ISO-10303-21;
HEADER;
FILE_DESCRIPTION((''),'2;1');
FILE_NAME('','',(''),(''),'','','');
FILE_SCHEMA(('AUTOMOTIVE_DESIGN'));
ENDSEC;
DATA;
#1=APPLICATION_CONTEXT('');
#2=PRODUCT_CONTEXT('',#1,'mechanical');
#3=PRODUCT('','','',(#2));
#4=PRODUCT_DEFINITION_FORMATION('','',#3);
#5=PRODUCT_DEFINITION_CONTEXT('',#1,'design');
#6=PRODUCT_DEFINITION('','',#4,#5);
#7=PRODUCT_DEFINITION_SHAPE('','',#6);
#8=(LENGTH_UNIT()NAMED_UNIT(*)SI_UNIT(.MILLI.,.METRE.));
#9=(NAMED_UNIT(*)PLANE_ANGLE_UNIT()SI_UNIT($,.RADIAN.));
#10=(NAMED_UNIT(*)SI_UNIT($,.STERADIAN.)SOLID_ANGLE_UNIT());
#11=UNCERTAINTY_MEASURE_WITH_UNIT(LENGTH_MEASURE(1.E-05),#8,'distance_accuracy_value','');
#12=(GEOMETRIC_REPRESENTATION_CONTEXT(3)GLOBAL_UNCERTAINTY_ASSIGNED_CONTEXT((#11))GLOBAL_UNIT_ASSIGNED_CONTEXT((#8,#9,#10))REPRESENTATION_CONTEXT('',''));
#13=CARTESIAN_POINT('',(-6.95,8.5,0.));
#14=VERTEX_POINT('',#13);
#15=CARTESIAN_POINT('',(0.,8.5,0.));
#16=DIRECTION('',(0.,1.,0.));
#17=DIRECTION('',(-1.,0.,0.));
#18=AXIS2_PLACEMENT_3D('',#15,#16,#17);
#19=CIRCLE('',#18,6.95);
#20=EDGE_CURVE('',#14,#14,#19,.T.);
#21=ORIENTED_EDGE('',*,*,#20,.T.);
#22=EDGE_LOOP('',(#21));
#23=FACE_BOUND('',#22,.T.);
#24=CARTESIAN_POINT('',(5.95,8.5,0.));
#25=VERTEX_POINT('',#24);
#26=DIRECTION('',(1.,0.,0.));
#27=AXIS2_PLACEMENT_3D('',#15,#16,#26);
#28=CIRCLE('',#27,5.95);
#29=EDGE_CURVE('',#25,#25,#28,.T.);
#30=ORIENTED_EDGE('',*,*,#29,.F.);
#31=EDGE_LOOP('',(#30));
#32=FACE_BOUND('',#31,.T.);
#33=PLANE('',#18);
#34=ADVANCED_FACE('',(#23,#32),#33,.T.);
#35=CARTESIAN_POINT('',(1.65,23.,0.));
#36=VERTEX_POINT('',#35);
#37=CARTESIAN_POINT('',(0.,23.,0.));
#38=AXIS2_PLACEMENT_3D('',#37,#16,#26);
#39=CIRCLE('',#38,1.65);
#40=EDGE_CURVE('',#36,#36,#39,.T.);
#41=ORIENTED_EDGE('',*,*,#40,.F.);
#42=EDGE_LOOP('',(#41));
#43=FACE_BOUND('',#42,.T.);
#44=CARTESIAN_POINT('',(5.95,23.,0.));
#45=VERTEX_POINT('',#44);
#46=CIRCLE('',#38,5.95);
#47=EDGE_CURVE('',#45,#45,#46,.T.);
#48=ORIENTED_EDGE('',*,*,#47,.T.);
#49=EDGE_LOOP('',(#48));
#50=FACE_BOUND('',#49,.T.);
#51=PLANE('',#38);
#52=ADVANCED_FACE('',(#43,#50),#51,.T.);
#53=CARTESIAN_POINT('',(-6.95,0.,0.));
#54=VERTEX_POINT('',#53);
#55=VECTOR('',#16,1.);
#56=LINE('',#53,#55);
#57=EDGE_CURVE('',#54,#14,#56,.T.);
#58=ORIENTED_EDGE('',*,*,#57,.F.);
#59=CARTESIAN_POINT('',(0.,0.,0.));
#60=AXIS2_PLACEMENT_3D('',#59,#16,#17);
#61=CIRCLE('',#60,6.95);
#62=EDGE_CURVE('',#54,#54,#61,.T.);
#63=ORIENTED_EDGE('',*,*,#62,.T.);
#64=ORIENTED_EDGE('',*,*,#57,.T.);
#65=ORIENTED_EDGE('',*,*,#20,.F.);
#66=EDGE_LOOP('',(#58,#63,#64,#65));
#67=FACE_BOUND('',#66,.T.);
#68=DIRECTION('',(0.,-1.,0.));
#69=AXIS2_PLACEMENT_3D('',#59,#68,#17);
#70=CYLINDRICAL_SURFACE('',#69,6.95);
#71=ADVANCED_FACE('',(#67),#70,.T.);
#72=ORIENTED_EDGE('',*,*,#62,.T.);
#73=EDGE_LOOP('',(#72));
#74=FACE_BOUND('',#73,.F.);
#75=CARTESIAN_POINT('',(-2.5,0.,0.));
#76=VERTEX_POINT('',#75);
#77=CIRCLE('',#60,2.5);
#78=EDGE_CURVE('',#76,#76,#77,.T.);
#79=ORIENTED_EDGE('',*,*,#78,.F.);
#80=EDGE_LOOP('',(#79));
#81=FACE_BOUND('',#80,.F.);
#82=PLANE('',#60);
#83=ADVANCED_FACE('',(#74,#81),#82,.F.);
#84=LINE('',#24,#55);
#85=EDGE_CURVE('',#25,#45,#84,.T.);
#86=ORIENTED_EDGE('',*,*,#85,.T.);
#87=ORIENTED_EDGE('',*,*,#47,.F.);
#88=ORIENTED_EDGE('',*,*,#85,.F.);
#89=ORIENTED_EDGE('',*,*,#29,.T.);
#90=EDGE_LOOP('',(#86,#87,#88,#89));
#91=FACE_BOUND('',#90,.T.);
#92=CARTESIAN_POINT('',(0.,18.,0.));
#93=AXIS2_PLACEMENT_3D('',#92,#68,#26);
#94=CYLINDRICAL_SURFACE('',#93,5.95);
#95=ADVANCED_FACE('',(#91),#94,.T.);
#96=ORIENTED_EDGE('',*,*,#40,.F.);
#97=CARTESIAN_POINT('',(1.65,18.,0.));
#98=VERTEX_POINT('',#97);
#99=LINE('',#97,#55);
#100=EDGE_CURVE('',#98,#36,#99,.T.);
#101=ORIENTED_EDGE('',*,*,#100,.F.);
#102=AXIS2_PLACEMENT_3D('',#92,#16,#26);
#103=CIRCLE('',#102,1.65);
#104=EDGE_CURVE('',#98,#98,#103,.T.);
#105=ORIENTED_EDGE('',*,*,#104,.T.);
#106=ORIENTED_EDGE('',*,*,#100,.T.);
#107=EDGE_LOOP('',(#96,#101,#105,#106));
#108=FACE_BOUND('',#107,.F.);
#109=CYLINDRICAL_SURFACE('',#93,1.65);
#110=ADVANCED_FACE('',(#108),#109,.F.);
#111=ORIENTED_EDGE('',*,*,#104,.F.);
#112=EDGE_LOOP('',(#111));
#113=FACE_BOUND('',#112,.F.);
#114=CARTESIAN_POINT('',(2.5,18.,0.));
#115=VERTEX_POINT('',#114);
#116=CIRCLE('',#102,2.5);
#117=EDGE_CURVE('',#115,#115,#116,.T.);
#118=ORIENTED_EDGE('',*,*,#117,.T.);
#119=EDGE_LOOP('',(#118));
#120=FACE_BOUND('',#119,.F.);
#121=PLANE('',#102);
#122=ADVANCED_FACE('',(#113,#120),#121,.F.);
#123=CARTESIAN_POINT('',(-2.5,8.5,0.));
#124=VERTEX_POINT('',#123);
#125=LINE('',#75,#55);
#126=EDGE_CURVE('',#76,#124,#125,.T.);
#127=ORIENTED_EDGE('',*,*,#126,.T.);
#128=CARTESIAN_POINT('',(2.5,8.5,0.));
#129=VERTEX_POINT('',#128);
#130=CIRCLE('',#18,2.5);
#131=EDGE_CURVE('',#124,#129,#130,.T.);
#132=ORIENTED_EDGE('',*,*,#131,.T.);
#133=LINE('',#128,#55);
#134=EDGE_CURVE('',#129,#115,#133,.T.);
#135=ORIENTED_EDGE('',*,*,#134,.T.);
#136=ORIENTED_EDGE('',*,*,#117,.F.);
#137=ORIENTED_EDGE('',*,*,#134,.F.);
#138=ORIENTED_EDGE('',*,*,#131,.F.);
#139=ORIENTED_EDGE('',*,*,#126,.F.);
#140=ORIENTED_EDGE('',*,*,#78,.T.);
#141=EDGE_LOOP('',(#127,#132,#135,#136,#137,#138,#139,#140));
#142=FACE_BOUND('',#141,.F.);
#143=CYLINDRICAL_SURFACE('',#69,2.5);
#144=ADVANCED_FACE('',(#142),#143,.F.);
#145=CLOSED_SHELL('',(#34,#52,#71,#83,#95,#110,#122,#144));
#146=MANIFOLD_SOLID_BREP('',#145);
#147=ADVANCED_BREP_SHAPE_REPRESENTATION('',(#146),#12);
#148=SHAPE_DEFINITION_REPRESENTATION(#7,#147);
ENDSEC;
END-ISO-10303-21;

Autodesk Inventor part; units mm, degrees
ref_plane "YZ Plane" through (0, 0, 0) normal (1, 0, 0) x (0, 1, 0)
ref_plane "XZ Plane" through (0, 0, 0) normal (0, 1, 0) x (-1, 0, 0)
ref_plane "XY Plane" through (0, 0, 0) normal (0, 0, 1) x (1, 0, 0)
sketch "Esquisse1" plane through (0, 0, 0) normal (0, 1, 0) x (-1, 0, 0)
  circle A0 centre (0, 0) radius 6.95
  circle A1 centre (0, 0) radius 2.5
  dimension "d0" = 13.9
  dimension "d1" = 5
extrude "Extrusion1" add sketch "Esquisse1" along normal blind 8.5
sketch "Esquisse2" plane through (0, 8.5, 0) normal (0, 1, 0) x (1, 0, 0)
  circle A0 centre (0, 0) radius 5.95
  circle A1 centre (0, 0) radius 2.5 projected
  dimension "d4" = 11.9
extrude "Extrusion2" add sketch "Esquisse2" along normal blind 9.5
sketch "Esquisse3" plane through (0, 18, 0) normal (0, 1, 0) x (1, 0, 0)
  circle A0 centre (0, 0) radius 5.95 projected
  circle A1 centre (0, 0) radius 1.65
  dimension "d3" = 0
  dimension "d7" = 3.3
extrude "Extrusion3" add sketch "Esquisse3" along normal blind 5
thread "Filetage1" size "M4x0.7" class "6H" standard "ANSI Metric M Profile" length 25.616
properties part number "moyeu"
